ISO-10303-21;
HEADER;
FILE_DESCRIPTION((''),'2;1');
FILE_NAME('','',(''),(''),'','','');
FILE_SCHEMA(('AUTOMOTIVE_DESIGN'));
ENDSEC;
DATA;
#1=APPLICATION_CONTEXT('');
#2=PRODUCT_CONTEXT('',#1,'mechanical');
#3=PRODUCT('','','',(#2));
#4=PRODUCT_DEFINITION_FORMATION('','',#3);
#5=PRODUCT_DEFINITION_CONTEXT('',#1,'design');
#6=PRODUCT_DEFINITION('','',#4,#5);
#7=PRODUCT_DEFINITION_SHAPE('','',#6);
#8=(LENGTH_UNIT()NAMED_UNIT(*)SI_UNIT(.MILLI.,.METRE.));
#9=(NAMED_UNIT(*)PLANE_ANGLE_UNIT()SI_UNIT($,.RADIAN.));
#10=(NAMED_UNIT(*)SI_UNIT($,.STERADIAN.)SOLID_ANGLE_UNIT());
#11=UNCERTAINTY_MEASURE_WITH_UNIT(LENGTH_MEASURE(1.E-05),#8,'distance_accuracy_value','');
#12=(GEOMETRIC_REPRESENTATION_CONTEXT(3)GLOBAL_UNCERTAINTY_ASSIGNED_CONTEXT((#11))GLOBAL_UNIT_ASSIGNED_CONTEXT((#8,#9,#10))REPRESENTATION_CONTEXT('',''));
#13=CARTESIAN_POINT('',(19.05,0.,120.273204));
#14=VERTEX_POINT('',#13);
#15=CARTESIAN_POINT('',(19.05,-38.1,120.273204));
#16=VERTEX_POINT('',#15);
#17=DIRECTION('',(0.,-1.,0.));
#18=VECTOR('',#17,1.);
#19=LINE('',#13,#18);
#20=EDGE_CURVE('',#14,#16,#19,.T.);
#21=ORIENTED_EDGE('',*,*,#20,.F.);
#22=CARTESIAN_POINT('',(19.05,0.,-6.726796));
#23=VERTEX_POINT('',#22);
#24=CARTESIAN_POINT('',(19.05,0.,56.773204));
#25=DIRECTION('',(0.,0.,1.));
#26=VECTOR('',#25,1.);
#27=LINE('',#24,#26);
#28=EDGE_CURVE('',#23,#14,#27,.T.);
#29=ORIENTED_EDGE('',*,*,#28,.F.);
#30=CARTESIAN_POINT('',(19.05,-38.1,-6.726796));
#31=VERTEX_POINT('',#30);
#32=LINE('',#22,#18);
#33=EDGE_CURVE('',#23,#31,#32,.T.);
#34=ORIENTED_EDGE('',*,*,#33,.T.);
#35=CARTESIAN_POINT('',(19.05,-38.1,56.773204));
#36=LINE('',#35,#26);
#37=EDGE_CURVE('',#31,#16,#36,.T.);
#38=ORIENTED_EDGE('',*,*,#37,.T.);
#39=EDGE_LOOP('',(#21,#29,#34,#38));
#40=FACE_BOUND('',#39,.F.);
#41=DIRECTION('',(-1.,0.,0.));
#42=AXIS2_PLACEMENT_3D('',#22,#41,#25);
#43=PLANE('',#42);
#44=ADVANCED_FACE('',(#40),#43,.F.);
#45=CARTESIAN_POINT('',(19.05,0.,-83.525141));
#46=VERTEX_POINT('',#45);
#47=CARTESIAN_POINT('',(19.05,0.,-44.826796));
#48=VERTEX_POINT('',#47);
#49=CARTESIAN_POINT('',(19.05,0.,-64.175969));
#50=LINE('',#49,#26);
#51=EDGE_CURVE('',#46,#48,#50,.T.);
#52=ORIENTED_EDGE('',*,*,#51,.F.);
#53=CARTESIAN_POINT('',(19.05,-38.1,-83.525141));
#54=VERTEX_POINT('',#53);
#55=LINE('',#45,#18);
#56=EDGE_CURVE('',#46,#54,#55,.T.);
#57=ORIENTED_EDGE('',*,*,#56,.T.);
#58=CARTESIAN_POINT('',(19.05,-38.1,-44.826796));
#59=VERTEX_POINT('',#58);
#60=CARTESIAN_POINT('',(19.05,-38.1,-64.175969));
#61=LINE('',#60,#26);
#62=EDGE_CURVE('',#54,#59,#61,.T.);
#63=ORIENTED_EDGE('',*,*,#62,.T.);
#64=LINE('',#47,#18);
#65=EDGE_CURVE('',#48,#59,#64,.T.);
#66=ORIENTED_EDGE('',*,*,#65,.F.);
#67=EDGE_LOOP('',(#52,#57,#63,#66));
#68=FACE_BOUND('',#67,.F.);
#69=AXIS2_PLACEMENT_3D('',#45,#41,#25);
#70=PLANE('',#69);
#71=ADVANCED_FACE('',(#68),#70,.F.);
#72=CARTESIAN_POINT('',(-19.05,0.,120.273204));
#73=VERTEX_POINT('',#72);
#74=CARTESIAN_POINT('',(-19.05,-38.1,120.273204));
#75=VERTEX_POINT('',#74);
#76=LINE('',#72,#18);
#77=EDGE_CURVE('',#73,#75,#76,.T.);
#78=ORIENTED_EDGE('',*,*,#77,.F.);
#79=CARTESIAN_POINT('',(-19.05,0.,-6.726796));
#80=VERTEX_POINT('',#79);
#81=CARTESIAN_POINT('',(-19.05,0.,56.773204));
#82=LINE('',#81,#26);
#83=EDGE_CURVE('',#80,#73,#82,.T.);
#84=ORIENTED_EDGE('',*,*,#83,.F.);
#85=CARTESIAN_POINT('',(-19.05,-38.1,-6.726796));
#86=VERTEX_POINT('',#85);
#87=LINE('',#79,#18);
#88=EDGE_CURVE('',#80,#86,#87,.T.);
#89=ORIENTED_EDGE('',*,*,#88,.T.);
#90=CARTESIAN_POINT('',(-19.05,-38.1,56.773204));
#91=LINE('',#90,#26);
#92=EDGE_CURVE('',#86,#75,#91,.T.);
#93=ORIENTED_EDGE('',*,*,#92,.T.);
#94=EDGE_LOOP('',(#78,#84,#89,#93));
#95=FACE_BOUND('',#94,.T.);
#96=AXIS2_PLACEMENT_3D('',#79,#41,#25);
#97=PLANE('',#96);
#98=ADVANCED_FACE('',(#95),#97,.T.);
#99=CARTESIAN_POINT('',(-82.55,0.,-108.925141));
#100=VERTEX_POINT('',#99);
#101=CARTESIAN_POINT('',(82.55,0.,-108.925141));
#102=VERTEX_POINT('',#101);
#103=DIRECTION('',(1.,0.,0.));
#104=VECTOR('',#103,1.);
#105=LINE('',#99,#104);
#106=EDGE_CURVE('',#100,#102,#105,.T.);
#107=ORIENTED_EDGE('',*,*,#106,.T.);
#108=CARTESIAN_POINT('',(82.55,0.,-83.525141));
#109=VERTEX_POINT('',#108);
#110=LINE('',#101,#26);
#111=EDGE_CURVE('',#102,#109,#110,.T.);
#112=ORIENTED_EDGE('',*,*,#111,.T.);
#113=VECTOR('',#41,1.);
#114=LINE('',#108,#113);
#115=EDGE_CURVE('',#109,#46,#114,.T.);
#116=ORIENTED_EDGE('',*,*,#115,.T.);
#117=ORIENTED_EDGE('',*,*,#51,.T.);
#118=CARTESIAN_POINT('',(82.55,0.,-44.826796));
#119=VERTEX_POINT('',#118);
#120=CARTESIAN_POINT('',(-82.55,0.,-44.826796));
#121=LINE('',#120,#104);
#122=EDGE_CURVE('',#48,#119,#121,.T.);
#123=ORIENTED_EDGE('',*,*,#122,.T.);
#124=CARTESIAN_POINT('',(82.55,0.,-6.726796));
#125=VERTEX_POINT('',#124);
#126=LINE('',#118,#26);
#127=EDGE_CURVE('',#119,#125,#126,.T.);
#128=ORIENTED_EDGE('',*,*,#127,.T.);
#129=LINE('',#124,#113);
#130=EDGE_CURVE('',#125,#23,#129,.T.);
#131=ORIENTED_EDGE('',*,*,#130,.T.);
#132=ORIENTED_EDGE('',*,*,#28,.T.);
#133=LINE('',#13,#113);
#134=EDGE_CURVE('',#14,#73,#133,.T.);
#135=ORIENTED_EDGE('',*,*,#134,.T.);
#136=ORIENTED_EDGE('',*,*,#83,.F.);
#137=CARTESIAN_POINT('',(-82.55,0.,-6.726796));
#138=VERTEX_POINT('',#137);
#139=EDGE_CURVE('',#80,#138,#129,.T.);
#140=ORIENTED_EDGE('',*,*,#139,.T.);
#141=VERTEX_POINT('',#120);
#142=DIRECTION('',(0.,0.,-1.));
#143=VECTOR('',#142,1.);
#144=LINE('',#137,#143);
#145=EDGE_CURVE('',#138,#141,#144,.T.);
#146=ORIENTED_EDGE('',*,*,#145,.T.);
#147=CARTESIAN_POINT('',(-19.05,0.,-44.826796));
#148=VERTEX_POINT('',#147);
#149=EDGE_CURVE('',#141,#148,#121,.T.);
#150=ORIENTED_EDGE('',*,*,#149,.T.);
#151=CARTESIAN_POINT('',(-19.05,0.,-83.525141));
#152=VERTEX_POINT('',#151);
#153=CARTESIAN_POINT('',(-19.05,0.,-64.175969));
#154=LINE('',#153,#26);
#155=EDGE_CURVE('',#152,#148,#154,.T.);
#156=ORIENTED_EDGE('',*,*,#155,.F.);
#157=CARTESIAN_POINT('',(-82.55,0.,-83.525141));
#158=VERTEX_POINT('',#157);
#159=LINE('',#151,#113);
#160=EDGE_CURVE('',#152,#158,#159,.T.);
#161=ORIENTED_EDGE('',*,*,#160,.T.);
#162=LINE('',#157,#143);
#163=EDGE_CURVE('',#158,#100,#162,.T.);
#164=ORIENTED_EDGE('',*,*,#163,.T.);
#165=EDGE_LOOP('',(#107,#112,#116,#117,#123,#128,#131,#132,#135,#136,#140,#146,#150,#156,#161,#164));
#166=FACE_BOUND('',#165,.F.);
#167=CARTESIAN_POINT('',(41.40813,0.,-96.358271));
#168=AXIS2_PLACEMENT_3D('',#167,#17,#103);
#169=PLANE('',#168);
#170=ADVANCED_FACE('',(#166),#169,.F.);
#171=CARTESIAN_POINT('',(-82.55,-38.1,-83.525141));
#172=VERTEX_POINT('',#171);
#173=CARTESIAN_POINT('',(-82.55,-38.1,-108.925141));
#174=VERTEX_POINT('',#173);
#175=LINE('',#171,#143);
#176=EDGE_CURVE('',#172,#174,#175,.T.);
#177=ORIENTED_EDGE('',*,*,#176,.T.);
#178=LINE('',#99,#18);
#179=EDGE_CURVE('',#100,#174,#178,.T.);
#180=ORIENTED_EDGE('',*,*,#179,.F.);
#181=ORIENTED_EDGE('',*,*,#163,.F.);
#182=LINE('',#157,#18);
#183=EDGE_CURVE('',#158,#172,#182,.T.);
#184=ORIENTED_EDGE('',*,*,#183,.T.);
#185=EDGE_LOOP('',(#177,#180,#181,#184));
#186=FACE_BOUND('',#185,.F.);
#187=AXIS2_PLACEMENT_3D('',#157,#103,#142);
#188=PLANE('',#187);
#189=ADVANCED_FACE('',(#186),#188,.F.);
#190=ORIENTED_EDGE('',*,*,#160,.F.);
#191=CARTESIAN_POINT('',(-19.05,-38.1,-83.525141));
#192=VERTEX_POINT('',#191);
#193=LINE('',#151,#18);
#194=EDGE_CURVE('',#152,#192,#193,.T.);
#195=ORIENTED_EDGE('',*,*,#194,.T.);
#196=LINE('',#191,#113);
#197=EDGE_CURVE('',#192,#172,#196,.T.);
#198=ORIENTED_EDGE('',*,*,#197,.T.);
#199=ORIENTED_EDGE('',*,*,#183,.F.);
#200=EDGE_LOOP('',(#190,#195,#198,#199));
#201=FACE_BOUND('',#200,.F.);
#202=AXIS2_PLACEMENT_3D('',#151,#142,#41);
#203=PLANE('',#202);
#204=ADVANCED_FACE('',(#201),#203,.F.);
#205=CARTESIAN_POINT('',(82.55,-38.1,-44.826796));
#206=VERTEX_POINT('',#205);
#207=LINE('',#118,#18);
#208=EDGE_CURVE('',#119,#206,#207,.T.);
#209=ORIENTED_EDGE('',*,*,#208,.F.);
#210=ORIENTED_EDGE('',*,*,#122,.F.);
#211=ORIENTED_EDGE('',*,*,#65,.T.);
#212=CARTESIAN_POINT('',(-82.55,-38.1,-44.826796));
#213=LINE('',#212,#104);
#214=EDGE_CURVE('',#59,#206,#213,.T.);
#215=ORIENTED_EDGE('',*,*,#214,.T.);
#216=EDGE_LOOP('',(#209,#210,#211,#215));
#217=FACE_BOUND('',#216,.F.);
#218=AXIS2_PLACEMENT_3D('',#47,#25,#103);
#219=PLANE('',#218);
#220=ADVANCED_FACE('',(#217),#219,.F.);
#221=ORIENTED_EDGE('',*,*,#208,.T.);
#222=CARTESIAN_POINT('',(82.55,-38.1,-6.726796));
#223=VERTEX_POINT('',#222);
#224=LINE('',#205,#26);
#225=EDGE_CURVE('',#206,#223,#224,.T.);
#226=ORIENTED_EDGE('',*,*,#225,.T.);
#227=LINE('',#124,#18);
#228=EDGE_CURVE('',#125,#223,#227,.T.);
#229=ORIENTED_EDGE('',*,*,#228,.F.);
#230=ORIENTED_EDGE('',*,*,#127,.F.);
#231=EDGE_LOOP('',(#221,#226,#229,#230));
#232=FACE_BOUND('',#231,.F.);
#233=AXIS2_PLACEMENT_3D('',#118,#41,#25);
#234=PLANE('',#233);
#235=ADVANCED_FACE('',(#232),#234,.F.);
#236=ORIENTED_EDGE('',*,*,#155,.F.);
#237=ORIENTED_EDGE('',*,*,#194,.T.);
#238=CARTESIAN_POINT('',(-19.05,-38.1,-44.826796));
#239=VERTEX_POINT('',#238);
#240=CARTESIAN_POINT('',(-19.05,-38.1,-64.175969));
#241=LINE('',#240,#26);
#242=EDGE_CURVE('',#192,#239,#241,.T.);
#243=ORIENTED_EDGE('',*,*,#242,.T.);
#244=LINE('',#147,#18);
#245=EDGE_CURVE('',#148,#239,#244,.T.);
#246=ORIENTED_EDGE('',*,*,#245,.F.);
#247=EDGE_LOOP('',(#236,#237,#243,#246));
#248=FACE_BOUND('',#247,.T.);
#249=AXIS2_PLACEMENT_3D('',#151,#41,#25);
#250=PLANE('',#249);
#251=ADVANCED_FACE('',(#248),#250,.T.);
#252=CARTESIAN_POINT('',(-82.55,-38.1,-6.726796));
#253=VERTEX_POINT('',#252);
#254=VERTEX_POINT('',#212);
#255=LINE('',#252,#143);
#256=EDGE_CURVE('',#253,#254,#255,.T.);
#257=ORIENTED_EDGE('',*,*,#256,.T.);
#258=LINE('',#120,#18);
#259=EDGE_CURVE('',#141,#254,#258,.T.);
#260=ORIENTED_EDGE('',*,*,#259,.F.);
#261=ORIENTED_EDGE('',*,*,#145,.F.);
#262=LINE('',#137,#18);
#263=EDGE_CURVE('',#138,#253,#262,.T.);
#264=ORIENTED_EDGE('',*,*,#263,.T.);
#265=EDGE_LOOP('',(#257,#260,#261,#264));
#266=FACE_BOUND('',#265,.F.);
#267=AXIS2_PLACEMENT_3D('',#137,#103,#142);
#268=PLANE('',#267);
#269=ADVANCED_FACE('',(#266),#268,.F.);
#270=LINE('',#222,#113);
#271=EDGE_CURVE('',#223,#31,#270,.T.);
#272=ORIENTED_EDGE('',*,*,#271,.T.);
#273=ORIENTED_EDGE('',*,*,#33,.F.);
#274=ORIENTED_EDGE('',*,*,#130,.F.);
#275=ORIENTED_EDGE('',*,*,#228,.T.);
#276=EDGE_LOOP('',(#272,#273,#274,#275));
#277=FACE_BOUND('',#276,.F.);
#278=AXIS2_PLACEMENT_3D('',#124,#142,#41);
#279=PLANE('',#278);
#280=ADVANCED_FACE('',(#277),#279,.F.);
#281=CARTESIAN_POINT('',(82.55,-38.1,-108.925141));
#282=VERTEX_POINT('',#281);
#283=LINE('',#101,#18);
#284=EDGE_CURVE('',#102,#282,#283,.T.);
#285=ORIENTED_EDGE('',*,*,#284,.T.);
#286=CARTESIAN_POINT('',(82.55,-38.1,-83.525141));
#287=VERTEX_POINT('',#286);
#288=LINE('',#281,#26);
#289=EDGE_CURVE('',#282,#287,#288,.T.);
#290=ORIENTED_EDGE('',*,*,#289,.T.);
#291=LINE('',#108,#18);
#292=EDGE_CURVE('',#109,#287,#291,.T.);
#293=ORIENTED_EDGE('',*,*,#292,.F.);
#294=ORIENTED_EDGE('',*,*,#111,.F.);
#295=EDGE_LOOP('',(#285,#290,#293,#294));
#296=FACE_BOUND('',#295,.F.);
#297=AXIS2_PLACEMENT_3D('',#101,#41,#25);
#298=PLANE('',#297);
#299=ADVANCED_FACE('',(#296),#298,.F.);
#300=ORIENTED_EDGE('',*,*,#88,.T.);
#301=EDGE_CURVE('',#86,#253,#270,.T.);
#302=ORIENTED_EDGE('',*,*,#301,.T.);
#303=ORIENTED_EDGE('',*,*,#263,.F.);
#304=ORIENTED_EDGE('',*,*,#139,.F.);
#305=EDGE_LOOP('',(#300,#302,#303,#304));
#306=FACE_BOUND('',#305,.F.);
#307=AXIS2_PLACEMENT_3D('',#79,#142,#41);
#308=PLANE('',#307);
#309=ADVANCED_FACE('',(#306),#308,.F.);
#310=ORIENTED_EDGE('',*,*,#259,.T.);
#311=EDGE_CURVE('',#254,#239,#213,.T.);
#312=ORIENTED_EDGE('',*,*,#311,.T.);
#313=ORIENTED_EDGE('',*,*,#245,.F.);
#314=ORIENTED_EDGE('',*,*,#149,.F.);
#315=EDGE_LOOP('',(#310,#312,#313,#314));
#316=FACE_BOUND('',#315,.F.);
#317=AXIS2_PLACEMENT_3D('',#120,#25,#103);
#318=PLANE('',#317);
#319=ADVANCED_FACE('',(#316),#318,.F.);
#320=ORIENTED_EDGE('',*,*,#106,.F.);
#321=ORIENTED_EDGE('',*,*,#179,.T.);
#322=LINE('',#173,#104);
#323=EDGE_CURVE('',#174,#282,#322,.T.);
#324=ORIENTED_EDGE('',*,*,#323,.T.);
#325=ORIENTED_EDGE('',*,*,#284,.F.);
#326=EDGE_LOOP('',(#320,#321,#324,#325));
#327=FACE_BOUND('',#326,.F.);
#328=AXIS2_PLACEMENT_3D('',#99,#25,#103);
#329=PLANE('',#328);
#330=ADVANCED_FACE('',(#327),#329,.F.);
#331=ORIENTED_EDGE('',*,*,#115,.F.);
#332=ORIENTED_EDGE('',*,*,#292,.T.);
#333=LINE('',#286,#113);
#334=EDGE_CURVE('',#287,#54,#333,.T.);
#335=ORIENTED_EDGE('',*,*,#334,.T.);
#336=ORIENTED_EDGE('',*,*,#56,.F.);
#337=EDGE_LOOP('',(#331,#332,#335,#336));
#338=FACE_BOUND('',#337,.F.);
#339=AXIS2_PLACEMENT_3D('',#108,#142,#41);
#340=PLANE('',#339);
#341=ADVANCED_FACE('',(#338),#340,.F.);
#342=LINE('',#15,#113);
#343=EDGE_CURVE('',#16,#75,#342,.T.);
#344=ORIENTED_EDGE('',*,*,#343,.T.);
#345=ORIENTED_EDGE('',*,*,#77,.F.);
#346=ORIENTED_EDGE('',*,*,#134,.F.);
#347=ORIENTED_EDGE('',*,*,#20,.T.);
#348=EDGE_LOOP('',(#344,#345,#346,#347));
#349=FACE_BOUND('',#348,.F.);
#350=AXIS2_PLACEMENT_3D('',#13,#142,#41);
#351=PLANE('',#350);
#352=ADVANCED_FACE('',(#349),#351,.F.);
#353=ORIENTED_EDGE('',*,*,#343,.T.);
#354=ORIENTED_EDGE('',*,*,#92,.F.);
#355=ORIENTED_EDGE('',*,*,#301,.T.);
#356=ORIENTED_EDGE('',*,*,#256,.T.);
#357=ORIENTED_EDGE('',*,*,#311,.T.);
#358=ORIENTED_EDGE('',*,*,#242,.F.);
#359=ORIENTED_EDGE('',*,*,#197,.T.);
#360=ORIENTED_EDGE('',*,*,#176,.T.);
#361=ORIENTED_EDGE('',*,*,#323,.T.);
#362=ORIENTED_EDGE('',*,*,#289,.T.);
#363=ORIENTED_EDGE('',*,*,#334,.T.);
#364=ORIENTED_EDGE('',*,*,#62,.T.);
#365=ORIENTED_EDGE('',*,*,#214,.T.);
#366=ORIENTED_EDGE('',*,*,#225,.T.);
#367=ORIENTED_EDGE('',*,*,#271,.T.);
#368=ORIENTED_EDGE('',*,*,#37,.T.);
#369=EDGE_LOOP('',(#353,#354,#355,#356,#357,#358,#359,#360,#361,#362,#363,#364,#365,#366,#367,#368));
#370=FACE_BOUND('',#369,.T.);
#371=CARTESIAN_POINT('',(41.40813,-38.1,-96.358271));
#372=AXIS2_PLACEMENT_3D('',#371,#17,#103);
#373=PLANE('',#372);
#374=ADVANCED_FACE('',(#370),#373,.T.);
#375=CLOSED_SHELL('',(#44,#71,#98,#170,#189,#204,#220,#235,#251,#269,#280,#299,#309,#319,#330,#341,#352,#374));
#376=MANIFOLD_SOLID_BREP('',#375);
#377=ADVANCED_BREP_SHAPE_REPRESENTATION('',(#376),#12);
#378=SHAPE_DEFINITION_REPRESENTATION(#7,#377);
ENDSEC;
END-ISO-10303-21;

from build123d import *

# Parameters (mm, degrees)
F0_W     = 19.05
F0_H     = 38.6983451158
F0_H_2   = 127
F0_H_3   = 1.5088043451
F1_DEPTH = 38.1


with BuildPart() as f1:
    # F0 (on Front) → F1 (new body)
    with BuildSketch(Plane.XZ):
        Polygon((82.55, -83.5251413941), (19.05, -83.5251413941), (19.05, -85.0339457393), (0, -85.0339457393), (0, -108.9251413941), (82.55, -108.9251413941), align=None)
        Polygon((0, -44.8267962784), (0, -6.7267962784), (-19.05, -6.7267962784), (-82.55, -6.7267962784), (-82.55, -44.8267962784), (-19.05, -44.8267962784), align=None)
        Polygon((19.05, -6.7267962784), (0, -6.7267962784), (0, -44.8267962784), (19.05, -44.8267962784), (82.55, -44.8267962784), (82.55, -6.7267962784), align=None)
        with Locations((9.525, -64.1759688362)):
            Rectangle(F0_W, F0_H)
        with Locations((-9.525, -64.1759688362)):
            Rectangle(F0_W, F0_H)
        with Locations((9.525, 56.7732037216)):
            Rectangle(F0_W, F0_H_2)
        Polygon((0, -85.0339457393), (0, -83.5251413941), (-19.05, -83.5251413941), (-82.55, -83.5251413941), (-82.55, -108.9251413941), (0, -108.9251413941), align=None)
        with Locations((-9.525, 56.7732037216)):
            Rectangle(F0_W, F0_H_2)
        with Locations((9.525, -84.2795435667)):
            Rectangle(F0_W, F0_H_3)
    extrude(amount=F1_DEPTH)


solid = f1.part
